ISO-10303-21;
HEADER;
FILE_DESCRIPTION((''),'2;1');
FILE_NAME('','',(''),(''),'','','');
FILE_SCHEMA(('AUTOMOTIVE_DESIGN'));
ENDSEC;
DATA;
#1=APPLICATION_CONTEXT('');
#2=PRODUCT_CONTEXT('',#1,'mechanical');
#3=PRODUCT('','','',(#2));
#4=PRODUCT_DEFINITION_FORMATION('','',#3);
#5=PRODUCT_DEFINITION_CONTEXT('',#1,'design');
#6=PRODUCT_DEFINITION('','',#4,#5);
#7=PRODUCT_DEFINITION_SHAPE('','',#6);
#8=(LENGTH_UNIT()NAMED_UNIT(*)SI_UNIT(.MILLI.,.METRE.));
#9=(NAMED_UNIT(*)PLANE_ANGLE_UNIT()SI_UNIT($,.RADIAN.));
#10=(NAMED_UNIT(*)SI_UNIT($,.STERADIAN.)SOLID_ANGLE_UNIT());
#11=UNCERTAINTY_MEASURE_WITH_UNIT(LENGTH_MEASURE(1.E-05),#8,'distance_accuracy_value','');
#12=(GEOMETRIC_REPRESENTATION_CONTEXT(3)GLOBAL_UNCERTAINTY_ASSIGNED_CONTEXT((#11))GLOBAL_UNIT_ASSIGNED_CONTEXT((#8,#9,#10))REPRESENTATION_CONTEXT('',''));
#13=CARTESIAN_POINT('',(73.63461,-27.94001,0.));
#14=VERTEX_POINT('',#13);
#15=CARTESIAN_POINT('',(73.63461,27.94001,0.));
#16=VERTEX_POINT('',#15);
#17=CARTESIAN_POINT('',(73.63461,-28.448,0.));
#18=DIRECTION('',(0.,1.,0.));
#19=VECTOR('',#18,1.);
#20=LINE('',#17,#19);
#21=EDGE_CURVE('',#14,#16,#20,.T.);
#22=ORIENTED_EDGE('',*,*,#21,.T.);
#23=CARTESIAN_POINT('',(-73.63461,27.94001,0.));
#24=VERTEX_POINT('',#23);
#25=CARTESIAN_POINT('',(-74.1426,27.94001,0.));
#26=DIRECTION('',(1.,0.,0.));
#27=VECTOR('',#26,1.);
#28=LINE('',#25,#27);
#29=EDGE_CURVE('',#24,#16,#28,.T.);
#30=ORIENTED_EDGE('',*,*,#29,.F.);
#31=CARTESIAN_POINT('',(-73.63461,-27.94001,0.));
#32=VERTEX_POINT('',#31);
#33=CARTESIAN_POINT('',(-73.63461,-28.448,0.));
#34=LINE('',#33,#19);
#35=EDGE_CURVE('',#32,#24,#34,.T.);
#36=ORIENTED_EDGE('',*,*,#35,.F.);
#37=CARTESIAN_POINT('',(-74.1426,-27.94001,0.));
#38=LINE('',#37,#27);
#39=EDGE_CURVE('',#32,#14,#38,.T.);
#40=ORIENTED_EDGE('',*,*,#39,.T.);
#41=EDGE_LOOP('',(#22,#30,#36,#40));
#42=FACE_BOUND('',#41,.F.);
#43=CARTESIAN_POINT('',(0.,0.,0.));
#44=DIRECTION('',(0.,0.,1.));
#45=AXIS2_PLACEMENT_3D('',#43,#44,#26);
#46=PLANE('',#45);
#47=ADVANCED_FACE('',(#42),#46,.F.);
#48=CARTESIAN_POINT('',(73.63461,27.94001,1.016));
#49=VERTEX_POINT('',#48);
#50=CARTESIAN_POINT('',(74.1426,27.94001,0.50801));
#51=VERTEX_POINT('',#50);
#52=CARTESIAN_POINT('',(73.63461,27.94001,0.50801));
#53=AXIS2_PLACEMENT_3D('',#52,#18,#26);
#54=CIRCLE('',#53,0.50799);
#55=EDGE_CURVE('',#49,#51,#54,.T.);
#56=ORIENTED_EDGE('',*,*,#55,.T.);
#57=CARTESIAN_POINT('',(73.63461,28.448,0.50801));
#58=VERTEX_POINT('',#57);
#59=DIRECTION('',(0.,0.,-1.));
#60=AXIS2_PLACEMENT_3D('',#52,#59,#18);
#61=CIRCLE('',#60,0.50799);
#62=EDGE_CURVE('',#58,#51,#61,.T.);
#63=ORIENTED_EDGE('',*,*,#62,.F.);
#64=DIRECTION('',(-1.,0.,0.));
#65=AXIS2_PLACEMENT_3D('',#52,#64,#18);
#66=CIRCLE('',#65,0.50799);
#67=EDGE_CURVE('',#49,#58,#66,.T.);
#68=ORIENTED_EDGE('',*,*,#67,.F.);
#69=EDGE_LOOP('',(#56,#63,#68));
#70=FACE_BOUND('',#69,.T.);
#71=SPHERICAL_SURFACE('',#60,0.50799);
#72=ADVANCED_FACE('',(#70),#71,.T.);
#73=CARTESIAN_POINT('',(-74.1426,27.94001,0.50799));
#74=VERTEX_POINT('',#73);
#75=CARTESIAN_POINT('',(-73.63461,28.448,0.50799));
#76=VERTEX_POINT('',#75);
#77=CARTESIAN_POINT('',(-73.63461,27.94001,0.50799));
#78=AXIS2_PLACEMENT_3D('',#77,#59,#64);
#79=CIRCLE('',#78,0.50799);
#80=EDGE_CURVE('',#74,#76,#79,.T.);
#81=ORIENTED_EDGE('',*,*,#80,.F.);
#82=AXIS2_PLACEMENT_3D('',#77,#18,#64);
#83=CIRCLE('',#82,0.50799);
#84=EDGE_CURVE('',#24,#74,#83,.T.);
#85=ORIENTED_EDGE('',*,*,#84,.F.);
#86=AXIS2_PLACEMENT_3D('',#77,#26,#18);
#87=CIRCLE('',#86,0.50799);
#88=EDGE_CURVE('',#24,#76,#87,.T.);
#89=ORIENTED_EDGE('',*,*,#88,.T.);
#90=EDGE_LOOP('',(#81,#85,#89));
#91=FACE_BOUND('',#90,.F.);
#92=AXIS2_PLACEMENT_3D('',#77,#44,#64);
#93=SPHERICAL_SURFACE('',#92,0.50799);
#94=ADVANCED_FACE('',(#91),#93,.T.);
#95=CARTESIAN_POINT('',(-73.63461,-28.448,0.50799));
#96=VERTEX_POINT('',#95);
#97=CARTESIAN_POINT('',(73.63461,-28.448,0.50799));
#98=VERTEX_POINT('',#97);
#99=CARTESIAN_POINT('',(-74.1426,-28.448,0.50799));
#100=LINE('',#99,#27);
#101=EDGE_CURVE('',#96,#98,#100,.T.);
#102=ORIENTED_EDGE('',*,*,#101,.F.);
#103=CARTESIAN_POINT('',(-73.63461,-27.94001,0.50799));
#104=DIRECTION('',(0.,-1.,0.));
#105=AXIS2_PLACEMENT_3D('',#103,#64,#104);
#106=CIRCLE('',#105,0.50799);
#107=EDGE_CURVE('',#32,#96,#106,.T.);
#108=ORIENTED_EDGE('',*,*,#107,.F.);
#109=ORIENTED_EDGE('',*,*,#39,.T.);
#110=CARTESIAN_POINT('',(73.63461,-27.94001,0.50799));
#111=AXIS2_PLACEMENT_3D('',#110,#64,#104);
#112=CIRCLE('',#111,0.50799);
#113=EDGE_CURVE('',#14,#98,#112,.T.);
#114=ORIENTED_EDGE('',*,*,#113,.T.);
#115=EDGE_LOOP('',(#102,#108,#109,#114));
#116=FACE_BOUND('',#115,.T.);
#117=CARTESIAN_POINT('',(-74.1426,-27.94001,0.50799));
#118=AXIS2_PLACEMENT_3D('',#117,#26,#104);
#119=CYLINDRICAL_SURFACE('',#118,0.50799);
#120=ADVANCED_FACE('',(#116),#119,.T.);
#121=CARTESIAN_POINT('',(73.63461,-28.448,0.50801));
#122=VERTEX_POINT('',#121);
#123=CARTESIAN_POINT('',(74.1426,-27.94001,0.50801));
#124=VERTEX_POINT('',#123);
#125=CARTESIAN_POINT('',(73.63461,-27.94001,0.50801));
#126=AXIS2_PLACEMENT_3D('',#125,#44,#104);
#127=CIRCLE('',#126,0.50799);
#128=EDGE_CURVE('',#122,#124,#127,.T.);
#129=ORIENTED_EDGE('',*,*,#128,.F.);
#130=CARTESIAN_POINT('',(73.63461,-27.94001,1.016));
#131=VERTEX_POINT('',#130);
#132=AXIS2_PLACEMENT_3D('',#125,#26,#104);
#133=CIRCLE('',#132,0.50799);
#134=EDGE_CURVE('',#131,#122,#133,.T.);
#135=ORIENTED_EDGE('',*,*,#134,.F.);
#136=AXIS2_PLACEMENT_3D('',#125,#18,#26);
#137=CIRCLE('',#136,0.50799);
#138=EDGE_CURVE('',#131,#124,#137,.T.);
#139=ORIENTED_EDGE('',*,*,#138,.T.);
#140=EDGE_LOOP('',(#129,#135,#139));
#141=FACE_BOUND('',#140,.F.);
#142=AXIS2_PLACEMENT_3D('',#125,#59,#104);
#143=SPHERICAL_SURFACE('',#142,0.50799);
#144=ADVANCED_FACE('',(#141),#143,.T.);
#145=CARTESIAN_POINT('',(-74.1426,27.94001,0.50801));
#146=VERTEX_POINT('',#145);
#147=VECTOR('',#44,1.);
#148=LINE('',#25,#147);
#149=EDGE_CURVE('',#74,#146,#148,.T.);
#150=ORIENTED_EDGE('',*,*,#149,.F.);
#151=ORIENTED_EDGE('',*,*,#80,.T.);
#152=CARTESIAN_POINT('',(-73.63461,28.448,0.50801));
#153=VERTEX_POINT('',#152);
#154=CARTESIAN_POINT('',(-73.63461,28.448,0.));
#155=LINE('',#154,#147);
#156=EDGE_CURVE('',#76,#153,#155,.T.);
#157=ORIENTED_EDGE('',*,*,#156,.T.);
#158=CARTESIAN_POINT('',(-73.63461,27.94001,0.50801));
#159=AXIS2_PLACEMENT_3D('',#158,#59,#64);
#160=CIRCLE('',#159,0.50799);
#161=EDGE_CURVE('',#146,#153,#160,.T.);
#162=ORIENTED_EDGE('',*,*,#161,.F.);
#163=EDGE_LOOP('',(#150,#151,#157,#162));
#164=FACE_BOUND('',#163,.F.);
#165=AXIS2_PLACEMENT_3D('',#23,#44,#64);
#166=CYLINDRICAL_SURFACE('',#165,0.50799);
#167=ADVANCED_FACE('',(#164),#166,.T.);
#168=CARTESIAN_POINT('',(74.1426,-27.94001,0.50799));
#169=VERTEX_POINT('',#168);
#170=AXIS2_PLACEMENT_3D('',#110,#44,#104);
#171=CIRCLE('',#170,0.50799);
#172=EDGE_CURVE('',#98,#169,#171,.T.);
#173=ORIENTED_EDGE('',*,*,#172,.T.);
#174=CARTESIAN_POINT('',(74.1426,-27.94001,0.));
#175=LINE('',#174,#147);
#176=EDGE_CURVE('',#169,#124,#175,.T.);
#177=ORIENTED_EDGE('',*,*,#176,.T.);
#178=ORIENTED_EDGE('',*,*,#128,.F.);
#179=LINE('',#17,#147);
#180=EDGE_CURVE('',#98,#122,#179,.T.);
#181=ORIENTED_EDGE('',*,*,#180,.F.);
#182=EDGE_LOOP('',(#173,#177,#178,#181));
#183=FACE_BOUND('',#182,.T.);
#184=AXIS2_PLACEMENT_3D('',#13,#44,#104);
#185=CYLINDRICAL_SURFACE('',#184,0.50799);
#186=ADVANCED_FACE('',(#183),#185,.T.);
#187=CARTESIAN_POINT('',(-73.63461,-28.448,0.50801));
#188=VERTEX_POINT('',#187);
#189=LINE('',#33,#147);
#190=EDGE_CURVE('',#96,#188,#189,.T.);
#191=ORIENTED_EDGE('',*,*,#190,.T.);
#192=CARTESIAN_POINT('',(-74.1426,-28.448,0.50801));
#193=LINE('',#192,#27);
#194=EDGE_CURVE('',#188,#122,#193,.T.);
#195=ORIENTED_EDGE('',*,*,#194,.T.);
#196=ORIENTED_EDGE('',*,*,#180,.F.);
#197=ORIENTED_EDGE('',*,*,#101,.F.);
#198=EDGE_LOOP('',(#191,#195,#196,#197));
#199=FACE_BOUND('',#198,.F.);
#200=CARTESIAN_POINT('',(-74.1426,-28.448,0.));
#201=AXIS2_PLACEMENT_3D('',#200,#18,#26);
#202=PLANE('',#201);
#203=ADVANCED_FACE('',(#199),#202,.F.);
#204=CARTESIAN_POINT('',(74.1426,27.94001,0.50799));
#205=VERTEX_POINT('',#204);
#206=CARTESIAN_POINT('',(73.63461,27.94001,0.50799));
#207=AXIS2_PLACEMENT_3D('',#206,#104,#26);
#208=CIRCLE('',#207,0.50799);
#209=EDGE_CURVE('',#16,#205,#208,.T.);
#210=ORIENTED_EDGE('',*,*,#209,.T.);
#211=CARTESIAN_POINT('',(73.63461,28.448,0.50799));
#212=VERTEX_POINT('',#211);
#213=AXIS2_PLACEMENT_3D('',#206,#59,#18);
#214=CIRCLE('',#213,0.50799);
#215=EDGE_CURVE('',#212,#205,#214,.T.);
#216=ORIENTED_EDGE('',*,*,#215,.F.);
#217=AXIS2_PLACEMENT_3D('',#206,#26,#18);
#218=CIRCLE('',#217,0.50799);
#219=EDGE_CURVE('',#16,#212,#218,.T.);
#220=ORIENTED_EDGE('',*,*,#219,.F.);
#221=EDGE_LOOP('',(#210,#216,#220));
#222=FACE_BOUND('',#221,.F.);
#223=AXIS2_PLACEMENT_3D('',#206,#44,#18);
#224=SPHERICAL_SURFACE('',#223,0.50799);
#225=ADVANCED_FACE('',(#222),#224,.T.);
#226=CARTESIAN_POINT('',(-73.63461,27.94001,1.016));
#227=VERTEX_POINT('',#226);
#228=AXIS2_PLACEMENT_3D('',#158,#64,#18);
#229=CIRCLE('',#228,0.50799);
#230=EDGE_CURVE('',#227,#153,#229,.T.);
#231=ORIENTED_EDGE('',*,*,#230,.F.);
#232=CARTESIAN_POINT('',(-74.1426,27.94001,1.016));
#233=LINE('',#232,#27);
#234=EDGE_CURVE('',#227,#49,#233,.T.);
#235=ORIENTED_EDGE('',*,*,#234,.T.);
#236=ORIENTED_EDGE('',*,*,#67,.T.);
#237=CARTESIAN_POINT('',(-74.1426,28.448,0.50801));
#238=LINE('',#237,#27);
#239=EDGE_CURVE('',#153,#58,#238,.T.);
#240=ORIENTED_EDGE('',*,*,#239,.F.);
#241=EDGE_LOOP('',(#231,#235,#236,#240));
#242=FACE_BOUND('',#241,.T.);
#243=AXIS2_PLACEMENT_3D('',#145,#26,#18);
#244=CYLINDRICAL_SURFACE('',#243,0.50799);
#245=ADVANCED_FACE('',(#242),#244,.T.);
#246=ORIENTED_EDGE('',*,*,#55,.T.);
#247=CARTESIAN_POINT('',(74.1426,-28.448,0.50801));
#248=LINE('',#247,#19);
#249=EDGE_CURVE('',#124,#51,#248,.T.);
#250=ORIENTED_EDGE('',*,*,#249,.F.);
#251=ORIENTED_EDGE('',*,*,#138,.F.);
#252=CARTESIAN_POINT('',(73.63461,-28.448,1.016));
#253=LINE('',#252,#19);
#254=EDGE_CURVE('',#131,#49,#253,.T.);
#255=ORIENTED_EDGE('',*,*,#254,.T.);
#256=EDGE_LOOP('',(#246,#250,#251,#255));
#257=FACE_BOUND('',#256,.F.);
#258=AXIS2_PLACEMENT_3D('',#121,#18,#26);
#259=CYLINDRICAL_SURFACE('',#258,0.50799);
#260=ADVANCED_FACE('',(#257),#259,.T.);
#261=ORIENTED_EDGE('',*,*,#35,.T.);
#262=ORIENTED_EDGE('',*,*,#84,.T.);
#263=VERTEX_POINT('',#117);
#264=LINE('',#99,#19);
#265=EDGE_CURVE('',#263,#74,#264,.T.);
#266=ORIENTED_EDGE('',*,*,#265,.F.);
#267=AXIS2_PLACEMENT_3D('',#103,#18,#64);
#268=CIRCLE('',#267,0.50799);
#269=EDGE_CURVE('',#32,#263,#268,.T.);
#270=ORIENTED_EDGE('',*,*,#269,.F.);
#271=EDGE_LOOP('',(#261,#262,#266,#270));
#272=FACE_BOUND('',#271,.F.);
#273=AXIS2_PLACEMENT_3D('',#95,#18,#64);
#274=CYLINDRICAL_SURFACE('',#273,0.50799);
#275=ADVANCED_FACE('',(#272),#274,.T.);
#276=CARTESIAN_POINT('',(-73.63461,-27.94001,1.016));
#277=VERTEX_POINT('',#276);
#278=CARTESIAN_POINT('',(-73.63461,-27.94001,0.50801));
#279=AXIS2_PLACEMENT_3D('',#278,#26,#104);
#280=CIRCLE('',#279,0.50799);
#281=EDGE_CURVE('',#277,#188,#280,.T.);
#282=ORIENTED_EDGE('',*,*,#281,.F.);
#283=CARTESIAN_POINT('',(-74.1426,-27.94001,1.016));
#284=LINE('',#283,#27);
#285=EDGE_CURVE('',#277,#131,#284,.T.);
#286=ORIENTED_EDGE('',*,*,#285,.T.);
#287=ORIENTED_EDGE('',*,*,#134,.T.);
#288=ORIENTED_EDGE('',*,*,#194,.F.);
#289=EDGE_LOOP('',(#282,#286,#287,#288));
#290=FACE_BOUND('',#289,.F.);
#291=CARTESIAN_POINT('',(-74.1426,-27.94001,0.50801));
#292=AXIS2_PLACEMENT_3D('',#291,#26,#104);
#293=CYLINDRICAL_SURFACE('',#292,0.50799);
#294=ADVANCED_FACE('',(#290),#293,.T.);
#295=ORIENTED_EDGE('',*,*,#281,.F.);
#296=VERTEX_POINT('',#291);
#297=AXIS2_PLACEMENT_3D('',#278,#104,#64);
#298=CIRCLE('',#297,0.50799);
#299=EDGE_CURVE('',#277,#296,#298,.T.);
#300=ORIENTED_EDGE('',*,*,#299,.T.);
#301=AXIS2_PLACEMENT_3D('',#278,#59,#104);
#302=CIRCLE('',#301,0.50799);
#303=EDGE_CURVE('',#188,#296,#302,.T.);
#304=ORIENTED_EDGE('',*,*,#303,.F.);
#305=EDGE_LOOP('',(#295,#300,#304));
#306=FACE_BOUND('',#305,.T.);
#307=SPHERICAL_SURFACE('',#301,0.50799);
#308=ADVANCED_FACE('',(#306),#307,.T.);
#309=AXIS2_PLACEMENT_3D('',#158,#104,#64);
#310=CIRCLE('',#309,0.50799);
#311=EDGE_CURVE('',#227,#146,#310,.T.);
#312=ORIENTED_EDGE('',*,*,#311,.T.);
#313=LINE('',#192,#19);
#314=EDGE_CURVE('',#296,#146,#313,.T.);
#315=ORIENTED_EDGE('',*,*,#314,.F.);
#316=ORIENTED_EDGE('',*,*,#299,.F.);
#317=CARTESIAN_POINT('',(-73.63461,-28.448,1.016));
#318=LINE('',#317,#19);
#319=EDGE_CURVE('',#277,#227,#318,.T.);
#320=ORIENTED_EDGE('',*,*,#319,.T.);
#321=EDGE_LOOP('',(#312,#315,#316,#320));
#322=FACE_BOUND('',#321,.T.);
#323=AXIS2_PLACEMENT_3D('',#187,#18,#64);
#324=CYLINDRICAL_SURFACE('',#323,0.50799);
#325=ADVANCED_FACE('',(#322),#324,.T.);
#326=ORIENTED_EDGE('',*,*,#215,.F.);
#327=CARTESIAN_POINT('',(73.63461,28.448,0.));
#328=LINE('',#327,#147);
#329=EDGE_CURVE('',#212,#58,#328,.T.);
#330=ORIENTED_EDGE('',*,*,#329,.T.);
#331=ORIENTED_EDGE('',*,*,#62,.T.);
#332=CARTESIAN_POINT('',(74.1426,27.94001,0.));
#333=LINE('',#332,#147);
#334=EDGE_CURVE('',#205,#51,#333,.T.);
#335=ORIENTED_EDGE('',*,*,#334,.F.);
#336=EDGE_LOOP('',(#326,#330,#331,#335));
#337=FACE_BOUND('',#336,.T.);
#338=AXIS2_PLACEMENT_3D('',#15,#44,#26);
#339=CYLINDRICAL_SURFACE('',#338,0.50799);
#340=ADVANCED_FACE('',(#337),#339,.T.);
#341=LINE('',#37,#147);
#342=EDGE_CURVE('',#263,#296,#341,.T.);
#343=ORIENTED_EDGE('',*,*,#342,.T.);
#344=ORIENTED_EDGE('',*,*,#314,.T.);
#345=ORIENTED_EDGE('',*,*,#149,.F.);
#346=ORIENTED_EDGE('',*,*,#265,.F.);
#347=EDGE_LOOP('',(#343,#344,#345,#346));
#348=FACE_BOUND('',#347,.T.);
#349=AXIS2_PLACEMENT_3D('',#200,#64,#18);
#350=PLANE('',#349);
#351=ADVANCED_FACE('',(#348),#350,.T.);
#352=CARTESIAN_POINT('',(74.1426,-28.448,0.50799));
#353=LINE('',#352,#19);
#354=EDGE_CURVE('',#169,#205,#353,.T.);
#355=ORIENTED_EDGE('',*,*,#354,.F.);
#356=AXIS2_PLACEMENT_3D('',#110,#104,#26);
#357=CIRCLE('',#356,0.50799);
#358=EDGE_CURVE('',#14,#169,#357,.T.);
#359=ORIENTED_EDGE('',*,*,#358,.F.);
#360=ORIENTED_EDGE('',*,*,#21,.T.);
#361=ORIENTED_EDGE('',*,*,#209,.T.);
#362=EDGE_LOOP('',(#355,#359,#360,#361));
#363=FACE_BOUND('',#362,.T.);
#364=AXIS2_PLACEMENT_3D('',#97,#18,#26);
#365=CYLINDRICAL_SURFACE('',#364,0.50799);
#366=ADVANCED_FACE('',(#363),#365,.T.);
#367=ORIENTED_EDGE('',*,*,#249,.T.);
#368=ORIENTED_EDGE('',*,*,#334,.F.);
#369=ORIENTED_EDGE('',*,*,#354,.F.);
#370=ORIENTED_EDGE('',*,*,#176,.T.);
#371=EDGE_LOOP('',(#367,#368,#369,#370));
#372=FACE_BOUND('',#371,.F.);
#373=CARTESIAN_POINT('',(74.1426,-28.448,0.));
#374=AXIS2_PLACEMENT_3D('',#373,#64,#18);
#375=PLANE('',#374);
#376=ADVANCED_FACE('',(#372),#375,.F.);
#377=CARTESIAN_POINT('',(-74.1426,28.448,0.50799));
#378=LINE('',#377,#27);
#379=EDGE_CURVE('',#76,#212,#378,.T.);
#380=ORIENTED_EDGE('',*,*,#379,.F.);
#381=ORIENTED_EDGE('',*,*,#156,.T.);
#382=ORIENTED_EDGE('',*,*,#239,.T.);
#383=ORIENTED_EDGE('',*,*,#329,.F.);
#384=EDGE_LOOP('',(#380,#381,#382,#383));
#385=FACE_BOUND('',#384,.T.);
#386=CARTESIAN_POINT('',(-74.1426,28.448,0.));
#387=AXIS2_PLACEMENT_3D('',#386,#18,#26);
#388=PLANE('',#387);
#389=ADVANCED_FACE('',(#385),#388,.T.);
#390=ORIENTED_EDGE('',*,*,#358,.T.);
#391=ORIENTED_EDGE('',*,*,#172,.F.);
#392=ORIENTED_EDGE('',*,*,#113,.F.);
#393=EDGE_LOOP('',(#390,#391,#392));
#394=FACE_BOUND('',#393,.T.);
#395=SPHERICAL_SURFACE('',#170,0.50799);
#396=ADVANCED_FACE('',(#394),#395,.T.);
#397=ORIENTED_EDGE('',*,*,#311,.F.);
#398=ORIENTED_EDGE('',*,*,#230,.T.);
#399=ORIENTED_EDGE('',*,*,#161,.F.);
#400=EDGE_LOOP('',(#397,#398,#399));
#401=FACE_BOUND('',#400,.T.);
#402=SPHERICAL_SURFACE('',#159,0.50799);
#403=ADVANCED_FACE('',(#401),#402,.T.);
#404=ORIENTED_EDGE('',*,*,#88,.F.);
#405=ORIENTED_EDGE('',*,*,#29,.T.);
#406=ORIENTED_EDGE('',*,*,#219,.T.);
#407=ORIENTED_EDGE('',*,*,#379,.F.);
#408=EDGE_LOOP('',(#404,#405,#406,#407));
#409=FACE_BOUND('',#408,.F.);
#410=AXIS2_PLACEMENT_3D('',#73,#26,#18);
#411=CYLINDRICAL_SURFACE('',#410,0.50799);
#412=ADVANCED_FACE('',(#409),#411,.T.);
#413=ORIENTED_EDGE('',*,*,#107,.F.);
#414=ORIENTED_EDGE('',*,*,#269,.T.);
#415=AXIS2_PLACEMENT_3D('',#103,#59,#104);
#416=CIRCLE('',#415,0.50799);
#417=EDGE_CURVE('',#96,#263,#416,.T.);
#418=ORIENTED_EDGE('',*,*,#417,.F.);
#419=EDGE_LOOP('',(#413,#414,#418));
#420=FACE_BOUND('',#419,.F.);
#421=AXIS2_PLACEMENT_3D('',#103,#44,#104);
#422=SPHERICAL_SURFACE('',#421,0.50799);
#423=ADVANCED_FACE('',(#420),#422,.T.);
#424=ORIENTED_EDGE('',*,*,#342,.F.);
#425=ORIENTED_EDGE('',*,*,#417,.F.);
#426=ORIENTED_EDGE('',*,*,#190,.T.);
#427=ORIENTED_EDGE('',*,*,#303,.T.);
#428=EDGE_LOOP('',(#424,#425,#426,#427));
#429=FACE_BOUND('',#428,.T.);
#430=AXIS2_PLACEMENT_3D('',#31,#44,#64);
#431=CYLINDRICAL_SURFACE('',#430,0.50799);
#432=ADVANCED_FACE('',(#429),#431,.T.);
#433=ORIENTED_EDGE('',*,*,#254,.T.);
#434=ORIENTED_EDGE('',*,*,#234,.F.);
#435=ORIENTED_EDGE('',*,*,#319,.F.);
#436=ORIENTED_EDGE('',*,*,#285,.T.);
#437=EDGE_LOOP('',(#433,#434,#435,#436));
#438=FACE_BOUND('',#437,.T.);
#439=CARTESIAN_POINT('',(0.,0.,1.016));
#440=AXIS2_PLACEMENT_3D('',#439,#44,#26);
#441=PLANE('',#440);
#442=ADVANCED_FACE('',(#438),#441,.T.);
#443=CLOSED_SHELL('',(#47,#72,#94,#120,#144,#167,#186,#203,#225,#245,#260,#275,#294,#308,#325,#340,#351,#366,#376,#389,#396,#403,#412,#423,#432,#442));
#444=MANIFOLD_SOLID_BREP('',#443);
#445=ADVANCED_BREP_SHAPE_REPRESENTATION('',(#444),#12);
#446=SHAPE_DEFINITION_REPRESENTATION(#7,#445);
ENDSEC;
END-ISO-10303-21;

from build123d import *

# Parameters (mm, degrees)
F0_W     = 148.2852
F0_H     = 56.896
F1_DEPTH = 1.016
F2_R     = 0.50799


# Not quite as in the source:
# - a fillet or chamfer is up to 0.001 mm smaller than in the source, because OpenCascade refuses the exact size


with BuildPart() as f1:
    # F0 (on Top) → F1 (new body)
    with BuildSketch(Plane.XY):
        Rectangle(F0_W, F0_H)
    extrude(amount=F1_DEPTH)

    # F2 (radius 0.508 in the source; OpenCascade refuses exactly that, so slightly less here)
    f2_edges = [f1.edges().sort_by_distance(p)[0] for p in [
        (-74.1426, -28.448, 0.508),
        (74.1426, -28.448, 0.508),
        (0, -28.448, 0),
        (0, -28.448, 1.016),
        (-74.1426, 28.448, 0.508),
        (-74.1426, 0, 0),
        (-74.1426, 0, 1.016),
        (74.1426, 28.448, 0.508),
        (0, 28.448, 0),
        (0, 28.448, 1.016),
        (74.1426, 0, 0),
        (74.1426, 0, 1.016),
    ]]
    fillet(f2_edges, radius=F2_R)


solid = f1.part
